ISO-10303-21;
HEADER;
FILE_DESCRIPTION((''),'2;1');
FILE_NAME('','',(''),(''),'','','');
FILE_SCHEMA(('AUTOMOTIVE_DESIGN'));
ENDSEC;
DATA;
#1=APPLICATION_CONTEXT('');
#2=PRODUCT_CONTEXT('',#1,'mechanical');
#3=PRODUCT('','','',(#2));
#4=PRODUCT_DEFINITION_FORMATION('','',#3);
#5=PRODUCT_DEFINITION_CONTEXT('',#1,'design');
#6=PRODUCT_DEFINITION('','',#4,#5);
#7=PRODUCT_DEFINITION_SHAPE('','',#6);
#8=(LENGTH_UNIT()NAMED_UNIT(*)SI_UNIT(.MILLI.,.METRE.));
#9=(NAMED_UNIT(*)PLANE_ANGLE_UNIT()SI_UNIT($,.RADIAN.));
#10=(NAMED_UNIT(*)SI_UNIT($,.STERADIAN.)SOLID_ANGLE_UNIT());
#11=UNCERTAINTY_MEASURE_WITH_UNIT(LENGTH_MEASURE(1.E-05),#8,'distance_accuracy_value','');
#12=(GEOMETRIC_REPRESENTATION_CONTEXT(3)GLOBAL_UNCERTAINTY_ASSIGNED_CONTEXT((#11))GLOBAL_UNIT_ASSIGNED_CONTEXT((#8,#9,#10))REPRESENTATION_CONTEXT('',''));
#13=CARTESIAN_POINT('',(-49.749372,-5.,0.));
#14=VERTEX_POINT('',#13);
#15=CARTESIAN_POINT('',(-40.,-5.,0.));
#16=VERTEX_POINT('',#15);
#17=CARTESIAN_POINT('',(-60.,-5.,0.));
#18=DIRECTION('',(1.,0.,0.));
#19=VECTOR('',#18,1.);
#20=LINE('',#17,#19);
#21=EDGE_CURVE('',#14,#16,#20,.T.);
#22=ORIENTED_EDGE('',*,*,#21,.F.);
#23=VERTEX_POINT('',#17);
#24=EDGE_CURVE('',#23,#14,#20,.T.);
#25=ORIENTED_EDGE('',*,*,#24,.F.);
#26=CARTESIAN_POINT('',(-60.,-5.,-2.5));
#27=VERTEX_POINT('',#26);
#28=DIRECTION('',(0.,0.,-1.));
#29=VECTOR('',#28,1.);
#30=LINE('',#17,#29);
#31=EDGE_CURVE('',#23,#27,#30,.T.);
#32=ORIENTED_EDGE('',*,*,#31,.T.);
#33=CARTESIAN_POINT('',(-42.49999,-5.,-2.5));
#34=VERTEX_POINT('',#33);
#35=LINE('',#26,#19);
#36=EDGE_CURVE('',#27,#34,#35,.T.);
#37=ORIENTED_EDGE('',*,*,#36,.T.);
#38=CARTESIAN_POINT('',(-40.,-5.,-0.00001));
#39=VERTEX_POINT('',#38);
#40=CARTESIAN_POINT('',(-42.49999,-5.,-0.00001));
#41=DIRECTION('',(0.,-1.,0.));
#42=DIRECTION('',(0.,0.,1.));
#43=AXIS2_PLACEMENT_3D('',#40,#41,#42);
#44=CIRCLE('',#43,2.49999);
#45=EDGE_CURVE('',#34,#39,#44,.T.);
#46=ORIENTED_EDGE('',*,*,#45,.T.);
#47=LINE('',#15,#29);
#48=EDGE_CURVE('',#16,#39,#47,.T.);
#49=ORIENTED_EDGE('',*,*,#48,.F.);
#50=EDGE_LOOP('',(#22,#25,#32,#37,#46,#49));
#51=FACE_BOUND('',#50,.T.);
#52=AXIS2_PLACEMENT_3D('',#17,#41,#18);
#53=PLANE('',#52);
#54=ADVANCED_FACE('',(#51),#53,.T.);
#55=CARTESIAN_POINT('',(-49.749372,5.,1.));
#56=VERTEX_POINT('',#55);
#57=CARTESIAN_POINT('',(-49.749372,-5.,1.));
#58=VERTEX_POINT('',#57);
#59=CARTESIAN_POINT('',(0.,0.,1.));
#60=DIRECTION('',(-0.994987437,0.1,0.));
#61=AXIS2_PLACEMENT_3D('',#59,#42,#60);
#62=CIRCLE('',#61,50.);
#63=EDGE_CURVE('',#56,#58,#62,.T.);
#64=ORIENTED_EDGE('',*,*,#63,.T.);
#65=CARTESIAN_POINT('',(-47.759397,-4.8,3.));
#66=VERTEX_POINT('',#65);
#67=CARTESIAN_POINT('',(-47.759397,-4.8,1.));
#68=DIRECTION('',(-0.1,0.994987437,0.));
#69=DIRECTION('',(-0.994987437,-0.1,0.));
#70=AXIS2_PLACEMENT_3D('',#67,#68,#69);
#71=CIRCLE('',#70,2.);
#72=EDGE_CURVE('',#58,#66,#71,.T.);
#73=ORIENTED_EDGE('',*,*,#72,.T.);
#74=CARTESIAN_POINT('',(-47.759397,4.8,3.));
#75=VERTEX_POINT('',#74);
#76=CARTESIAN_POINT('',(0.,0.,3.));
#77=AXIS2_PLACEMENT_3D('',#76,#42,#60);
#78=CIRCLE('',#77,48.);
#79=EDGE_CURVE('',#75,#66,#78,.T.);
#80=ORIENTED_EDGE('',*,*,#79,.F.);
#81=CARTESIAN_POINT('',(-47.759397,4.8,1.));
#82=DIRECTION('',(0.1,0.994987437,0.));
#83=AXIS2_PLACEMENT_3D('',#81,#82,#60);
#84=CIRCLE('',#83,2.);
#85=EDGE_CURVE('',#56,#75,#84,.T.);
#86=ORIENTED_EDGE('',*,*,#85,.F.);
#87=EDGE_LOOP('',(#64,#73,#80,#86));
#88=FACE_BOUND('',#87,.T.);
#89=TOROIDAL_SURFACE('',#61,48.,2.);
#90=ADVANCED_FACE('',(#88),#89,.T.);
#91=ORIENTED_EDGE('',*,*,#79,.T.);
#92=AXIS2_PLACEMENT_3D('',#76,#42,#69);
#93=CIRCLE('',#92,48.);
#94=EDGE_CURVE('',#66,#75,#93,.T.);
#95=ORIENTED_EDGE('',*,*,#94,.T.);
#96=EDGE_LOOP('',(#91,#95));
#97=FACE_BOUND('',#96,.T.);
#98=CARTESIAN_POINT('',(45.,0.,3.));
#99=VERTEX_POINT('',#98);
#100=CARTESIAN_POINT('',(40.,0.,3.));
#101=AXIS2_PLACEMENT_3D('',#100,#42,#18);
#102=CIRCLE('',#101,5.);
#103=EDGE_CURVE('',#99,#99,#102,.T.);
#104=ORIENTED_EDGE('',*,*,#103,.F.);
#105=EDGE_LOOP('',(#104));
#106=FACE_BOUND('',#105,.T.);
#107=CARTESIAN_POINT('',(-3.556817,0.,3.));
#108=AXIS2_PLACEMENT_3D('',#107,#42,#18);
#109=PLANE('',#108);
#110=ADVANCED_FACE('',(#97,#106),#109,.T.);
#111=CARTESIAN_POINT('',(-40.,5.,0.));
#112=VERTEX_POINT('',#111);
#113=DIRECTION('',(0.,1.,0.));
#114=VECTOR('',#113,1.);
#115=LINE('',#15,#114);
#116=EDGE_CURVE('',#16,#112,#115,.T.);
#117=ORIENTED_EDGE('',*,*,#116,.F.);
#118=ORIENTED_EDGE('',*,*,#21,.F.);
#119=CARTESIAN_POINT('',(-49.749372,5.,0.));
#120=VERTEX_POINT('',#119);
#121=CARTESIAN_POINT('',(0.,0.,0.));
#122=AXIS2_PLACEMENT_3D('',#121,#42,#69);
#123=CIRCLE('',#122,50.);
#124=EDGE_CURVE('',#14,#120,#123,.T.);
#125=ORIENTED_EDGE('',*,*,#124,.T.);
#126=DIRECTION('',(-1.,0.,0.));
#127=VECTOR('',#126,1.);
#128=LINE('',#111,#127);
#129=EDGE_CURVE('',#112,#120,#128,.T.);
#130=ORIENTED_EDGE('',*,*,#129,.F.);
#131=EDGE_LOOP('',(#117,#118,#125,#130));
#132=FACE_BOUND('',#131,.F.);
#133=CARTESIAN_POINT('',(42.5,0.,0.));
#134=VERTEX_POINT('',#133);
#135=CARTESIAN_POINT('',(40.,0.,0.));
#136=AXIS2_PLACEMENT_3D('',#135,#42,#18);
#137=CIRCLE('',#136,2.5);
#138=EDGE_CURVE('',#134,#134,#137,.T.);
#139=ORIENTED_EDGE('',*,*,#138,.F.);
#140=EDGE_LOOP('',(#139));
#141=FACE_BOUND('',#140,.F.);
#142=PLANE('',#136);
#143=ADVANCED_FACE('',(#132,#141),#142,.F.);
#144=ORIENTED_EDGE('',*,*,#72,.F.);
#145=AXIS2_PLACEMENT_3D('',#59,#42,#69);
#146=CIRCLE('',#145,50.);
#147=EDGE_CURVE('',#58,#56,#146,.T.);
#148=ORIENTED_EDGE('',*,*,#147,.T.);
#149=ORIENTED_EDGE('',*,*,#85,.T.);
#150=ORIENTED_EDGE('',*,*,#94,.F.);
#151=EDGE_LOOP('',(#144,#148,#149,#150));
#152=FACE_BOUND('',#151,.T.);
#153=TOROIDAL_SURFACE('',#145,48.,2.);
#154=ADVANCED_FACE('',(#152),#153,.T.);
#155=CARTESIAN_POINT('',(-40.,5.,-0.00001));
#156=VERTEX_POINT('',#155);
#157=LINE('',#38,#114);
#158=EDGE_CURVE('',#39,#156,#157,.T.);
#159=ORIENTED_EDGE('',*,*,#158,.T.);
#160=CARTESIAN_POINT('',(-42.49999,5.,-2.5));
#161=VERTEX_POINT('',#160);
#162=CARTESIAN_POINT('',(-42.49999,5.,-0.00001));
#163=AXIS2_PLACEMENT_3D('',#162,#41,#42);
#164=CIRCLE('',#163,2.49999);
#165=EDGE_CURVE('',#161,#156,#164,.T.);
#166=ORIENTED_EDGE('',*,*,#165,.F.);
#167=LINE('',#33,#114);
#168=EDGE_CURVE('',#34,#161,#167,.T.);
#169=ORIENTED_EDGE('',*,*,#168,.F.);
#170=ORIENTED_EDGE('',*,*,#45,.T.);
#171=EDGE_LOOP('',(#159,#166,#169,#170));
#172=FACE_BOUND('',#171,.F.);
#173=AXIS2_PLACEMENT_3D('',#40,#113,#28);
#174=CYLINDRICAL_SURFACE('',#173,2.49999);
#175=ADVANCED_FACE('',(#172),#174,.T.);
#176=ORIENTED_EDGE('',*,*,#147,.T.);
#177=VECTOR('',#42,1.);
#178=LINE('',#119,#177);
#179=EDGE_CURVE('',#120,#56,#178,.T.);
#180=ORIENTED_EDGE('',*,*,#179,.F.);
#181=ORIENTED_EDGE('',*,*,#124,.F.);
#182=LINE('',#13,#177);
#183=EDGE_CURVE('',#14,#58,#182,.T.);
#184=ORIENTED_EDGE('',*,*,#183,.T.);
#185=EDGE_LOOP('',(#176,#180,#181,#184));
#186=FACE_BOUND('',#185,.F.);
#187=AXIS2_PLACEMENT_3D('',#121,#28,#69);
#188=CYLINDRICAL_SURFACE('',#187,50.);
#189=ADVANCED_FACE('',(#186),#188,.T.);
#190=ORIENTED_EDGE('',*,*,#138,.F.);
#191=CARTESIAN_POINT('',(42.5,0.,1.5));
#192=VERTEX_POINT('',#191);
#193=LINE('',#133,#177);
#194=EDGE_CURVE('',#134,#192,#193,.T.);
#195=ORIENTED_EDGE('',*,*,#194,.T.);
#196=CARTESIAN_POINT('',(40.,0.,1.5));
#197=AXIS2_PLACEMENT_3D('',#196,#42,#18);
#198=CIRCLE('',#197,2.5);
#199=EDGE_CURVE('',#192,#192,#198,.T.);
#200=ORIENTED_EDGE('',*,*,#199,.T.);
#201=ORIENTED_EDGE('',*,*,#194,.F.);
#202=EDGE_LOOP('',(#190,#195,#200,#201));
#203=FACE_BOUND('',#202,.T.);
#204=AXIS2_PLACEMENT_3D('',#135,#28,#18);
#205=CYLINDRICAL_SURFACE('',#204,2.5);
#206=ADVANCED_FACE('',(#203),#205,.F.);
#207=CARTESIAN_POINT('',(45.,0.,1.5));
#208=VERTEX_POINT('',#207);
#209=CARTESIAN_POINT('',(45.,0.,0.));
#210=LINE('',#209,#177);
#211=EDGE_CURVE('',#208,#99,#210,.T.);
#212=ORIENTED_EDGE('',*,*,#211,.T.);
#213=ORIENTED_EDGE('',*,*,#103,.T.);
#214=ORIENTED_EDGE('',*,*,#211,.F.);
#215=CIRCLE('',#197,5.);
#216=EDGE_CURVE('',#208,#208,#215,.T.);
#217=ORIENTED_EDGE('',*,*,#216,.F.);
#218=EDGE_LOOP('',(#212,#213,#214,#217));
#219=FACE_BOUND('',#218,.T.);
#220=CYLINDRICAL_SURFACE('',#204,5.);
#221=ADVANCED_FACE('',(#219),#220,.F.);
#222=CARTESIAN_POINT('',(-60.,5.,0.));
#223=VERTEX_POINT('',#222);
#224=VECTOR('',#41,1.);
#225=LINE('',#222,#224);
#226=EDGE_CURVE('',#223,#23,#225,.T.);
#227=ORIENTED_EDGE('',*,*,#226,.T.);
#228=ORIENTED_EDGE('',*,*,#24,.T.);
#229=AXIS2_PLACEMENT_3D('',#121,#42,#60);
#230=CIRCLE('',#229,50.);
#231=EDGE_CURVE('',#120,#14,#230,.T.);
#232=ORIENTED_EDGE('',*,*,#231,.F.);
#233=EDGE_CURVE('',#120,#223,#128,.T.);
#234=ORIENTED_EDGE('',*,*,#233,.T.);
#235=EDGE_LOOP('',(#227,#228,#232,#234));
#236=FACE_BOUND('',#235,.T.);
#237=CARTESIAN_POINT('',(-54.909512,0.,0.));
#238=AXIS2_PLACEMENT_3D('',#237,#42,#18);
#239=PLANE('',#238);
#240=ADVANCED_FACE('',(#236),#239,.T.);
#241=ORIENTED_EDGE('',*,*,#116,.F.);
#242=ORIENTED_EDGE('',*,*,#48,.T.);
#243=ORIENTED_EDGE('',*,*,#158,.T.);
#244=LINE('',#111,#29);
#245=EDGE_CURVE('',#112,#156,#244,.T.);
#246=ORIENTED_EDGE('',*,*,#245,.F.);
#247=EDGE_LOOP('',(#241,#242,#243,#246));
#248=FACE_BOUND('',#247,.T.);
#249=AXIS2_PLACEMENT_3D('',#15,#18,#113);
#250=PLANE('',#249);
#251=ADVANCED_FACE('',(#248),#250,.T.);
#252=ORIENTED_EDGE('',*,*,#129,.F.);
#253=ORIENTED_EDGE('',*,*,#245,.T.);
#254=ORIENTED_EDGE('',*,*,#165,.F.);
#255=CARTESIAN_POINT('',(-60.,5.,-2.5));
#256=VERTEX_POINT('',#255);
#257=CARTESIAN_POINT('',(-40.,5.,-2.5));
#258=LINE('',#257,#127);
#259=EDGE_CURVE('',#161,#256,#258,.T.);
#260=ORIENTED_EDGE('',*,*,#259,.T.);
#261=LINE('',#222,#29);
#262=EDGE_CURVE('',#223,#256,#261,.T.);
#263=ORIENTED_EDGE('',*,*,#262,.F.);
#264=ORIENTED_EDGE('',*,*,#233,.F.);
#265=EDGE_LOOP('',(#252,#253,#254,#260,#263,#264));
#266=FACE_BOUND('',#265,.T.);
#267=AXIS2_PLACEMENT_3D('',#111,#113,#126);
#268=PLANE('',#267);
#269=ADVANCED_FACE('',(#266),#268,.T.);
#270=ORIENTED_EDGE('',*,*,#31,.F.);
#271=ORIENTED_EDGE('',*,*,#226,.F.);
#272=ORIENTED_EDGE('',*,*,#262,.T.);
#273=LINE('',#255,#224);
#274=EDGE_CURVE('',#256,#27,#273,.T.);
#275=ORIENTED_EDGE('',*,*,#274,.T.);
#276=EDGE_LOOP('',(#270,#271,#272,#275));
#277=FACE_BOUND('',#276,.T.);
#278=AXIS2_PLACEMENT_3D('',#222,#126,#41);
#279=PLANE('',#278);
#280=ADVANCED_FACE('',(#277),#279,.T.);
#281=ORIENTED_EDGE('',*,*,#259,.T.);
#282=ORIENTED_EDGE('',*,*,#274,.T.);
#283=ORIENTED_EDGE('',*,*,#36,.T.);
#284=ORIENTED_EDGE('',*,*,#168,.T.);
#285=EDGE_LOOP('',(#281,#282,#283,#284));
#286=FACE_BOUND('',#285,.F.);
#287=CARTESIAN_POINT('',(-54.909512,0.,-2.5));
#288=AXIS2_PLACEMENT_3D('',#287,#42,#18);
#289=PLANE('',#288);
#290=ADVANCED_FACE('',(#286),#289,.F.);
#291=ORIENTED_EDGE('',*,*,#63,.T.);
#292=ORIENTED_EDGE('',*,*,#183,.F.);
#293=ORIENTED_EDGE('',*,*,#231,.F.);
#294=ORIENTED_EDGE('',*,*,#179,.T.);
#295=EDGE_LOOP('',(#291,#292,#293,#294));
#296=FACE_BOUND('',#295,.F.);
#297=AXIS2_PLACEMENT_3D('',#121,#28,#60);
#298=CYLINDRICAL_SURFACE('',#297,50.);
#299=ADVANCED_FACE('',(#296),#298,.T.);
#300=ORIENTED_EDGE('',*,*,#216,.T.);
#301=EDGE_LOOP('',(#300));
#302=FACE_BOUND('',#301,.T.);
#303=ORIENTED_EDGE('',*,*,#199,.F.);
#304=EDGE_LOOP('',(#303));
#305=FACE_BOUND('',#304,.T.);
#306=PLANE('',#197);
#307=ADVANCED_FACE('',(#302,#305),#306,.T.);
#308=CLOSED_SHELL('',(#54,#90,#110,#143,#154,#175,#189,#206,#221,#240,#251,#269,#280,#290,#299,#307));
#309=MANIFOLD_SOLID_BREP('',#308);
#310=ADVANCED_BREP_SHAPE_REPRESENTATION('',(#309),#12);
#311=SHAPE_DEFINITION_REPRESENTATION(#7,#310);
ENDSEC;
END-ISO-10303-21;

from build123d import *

# Parameters (mm, degrees)
F0_R     = 5
F1_DEPTH = 3
F0_R_2   = 2.5
F2_DEPTH = 1.5
F3_DEPTH = 2.5
F4_R     = 2.49999
F5_R     = 2


# Not quite as in the source:
# - a fillet or chamfer is up to 0.001 mm smaller than in the source, because OpenCascade refuses the exact size


with BuildPart() as f1:
    # F0 (on Top) → F1 (new body)
    with BuildSketch(Plane.XY):
        with BuildLine():
            ThreePointArc((-49.7493718553, -5), (2.503138753, -49.9373036555), (50, 0))
            ThreePointArc((50, 0), (2.503138753, 49.9373036555), (-49.7493718553, 5))
            Line((-49.7493718553, 5), (-40, 5))
            Line((-40, 5), (-40, -5))
            Line((-40, -5), (-49.7493718553, -5))
        make_face()
        with Locations((40, 0)):
            Circle(F0_R, mode=Mode.SUBTRACT)
        with BuildLine():
            Line((-40, 5), (-49.7493718553, 5))
            ThreePointArc((-49.7493718553, 5), (-50, 0), (-49.7493718553, -5))
            Line((-49.7493718553, -5), (-40, -5))
            Line((-40, -5), (-40, 5))
        make_face()
    extrude(amount=F1_DEPTH)

    # F0 (on Top) → F2 (join)
    with BuildSketch(Plane.XY):
        with Locations((40, 0)):
            Circle(F0_R)
        with Locations((40, 0)):
            Circle(F0_R_2, mode=Mode.SUBTRACT)
    extrude(amount=F2_DEPTH)

    # F0 (on Top) → F3 (join)
    with BuildSketch(Plane.XY):
        with BuildLine():
            ThreePointArc((-49.7493718553, -5), (-50, 0), (-49.7493718553, 5))
            Line((-49.7493718553, 5), (-60, 5))
            Line((-60, 5), (-60, -5))
            Line((-60, -5), (-49.7493718553, -5))
        make_face()
        with BuildLine():
            Line((-40, 5), (-49.7493718553, 5))
            ThreePointArc((-49.7493718553, 5), (-50, 0), (-49.7493718553, -5))
            Line((-49.7493718553, -5), (-40, -5))
            Line((-40, -5), (-40, 5))
        make_face()
    extrude(amount=-F3_DEPTH)

    # F4 (radius 2.5 in the source; OpenCascade refuses exactly that, so slightly less here)
    f4_edges = [f1.edges().sort_by_distance(p)[0] for p in [
        (-40, 0, -2.5),
    ]]
    fillet(f4_edges, radius=F4_R)

    # F5
    f5_edges = [f1.edges().sort_by_distance(p)[0] for p in [
        (-50, 0, 3),
    ]]
    fillet(f5_edges, radius=F5_R)


solid = f1.part
